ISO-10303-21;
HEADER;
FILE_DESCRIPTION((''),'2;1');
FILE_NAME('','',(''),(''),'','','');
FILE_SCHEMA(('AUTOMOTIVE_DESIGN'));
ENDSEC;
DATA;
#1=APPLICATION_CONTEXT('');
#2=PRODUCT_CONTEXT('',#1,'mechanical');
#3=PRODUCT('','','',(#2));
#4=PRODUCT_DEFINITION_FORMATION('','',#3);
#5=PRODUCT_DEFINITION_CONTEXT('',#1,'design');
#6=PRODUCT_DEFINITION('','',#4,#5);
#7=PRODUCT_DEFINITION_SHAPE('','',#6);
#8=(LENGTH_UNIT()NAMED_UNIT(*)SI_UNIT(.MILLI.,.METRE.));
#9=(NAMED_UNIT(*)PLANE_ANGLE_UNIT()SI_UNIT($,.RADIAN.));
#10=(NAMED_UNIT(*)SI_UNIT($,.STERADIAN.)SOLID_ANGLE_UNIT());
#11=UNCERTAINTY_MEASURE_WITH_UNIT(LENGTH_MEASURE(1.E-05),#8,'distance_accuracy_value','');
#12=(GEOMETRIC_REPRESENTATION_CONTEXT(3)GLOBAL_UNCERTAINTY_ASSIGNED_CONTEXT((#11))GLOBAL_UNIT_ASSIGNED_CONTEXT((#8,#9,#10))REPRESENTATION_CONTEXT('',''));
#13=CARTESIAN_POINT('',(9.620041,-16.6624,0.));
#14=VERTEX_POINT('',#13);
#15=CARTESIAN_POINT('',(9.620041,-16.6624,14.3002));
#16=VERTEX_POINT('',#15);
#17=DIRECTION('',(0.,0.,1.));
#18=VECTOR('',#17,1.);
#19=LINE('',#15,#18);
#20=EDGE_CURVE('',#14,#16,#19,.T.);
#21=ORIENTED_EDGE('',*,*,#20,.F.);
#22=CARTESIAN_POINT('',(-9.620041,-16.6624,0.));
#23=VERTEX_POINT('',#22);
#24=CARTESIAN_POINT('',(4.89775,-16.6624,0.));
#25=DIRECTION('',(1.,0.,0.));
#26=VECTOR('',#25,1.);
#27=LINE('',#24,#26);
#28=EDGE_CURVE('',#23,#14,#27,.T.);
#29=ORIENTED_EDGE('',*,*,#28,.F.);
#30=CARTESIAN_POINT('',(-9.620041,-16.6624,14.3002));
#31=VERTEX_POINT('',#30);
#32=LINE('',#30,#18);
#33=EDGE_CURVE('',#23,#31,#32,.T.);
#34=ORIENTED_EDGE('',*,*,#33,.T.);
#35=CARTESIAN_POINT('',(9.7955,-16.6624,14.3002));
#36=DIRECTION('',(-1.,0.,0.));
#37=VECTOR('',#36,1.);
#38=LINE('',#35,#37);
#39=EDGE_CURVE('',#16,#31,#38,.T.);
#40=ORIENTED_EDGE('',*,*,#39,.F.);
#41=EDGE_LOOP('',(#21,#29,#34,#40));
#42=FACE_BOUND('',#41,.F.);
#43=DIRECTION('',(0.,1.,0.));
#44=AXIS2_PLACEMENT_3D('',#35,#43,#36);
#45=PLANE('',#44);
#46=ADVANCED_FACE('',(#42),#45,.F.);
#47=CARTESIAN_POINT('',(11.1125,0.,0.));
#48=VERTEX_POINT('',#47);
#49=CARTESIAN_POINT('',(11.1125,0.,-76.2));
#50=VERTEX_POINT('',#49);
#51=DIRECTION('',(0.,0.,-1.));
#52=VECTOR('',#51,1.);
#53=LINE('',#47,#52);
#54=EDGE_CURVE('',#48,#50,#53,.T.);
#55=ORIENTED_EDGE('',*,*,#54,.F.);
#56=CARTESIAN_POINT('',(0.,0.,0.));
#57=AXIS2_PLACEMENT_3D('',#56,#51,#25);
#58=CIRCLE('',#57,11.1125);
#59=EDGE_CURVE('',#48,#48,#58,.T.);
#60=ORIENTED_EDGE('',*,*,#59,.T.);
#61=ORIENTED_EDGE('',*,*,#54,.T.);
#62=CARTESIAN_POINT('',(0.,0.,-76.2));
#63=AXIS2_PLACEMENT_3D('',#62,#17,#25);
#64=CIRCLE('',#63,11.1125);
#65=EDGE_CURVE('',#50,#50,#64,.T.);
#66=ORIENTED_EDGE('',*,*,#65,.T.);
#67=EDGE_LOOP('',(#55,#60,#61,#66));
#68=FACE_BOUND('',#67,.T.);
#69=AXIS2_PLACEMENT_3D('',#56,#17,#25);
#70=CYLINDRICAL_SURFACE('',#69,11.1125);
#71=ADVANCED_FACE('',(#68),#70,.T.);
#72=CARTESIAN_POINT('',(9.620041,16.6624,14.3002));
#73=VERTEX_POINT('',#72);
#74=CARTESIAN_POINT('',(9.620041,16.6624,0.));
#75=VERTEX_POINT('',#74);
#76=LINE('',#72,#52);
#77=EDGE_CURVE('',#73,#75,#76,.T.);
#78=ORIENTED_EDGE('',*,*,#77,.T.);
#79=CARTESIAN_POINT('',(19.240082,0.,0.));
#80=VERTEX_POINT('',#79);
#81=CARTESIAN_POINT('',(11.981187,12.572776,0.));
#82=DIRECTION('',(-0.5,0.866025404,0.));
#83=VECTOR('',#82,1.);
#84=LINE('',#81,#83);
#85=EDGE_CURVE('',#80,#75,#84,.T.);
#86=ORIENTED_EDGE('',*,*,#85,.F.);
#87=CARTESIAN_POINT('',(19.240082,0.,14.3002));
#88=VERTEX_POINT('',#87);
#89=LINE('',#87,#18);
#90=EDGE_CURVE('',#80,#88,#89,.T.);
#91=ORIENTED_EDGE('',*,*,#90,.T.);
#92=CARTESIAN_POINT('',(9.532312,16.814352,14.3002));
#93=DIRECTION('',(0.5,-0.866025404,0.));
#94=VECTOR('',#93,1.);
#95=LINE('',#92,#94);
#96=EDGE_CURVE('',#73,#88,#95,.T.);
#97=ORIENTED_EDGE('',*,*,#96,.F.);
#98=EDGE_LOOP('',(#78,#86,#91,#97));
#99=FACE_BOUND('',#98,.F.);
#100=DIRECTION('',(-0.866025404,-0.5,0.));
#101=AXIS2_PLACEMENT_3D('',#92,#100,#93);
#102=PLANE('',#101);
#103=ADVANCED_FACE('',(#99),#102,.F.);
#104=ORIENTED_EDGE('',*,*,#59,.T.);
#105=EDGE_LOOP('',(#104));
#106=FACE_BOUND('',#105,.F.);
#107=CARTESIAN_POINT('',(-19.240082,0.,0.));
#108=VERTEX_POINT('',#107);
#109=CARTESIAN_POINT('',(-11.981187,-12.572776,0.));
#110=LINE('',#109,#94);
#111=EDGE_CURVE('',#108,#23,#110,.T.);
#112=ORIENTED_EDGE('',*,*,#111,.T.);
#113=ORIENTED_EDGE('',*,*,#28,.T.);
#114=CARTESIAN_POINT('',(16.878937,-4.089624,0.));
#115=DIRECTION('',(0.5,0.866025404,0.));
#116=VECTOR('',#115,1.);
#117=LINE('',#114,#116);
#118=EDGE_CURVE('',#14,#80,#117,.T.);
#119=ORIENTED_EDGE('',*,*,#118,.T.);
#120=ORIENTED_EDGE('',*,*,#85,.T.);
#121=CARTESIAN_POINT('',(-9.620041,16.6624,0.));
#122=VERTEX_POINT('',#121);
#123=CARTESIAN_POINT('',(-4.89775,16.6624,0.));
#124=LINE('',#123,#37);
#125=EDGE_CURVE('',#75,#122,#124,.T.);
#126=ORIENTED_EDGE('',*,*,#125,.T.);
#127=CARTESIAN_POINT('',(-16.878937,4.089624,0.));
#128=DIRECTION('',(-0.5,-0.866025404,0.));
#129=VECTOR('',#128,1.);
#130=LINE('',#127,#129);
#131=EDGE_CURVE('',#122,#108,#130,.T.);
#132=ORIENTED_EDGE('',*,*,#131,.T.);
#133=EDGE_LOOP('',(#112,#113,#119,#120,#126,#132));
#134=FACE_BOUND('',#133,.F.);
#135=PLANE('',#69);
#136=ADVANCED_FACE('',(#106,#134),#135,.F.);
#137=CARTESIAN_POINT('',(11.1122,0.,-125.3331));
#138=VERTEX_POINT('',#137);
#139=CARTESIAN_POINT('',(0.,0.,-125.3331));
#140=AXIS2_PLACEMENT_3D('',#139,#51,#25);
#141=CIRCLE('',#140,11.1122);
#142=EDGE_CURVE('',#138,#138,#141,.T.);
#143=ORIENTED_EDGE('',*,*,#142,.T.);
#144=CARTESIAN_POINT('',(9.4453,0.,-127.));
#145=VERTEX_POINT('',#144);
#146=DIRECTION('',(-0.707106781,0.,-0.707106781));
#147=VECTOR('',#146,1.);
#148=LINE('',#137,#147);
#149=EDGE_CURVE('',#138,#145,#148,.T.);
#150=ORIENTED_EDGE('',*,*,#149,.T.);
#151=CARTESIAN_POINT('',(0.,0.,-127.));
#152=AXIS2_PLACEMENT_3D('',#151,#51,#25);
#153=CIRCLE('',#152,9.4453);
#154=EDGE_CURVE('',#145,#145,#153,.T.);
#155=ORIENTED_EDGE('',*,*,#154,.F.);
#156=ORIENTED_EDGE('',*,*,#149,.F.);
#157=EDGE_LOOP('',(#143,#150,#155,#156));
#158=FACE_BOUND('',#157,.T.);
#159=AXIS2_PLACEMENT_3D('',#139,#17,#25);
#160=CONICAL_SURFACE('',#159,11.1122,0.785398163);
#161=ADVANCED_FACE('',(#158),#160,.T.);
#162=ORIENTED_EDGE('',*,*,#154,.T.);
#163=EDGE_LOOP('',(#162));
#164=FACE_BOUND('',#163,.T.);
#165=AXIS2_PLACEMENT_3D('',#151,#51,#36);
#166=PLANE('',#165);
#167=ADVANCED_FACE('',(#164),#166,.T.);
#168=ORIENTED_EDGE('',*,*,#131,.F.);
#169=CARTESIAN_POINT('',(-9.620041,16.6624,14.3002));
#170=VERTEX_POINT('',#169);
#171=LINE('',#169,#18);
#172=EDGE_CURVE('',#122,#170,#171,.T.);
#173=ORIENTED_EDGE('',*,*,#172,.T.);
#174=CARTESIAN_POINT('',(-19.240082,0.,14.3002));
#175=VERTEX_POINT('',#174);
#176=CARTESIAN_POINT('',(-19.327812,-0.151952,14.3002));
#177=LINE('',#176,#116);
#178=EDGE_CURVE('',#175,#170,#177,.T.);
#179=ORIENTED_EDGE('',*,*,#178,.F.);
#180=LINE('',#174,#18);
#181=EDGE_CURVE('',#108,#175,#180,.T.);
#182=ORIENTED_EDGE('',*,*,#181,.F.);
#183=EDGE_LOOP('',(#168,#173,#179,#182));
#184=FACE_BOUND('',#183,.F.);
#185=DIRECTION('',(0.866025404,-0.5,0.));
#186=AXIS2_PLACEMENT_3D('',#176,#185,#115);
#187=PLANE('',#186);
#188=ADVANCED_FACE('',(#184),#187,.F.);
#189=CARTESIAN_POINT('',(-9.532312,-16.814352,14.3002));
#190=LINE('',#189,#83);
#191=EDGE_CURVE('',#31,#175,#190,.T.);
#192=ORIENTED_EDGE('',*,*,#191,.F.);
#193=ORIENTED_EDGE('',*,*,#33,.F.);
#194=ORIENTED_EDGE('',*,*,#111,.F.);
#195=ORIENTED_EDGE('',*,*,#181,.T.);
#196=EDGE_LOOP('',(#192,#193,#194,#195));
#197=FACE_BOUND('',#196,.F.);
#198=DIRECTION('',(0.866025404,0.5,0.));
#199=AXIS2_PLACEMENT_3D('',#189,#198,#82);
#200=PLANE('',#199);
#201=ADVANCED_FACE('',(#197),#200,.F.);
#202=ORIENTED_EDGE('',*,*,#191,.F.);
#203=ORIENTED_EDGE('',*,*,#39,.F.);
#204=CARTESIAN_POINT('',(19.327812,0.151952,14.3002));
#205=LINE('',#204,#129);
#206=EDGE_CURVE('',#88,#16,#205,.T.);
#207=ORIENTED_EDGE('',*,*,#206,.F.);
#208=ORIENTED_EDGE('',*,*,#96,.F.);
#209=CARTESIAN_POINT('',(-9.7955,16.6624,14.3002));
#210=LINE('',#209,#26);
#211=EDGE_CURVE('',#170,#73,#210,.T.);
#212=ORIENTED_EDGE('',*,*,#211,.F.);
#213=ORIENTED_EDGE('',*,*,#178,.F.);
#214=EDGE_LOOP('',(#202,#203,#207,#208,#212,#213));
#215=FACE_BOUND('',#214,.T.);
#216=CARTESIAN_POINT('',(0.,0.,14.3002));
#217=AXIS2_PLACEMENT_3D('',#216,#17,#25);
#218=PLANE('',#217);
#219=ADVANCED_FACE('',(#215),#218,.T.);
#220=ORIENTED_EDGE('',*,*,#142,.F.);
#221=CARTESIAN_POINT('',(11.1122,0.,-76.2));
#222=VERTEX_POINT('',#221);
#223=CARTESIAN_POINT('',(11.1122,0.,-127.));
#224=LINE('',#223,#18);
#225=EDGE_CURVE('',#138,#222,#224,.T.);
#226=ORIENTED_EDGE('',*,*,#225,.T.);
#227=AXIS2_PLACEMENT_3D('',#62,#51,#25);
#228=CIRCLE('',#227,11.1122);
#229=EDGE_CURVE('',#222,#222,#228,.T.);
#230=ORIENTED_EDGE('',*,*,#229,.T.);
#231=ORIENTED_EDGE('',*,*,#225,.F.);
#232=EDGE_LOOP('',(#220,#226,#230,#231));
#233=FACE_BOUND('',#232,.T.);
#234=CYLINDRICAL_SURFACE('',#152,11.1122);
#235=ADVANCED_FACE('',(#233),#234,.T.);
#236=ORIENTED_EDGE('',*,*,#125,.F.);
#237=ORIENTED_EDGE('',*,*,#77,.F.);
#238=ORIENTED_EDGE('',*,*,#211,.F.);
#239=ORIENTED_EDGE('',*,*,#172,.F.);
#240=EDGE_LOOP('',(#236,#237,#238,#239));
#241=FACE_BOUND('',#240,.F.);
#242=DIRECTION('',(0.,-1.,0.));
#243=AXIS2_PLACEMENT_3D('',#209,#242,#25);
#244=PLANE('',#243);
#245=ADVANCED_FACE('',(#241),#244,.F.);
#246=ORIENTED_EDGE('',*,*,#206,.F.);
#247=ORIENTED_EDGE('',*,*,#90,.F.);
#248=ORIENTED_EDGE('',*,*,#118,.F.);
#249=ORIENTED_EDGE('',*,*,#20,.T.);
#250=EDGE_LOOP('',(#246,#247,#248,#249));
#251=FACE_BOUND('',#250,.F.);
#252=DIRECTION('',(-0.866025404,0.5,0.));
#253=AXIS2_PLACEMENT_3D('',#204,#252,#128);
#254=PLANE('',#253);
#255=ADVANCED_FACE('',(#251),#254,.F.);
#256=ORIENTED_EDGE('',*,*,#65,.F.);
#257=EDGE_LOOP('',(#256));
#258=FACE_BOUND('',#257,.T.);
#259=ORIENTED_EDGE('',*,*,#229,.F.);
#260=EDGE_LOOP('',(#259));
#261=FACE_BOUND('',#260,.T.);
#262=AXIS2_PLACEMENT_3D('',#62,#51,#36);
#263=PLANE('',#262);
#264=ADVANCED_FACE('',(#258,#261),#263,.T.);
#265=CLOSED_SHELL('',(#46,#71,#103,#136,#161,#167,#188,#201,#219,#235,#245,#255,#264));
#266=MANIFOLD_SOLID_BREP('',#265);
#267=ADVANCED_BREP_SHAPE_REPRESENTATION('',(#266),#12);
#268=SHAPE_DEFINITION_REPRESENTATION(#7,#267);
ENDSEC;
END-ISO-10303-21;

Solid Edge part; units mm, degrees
sketch "Sketch1" plane through (0, 0, 0) normal (0, 0, 1) x (1, 0, 0)
  circle A0 centre (0, 0) radius 19.3284
  dimension "D1" = 38.6568
extrude "Protrusion1" add sketch "Sketch1" along normal blind 14.3002
sketch "Sketch2" plane through (0, 0, 0) normal (0, 0, -1) x (1, 0, 0)
  circle A0 centre (0, 0) radius 11.1125
extrude "Protrusion2" add sketch "Sketch2" along normal blind 127
sketch "Sketch3" plane through (0, 0, -127) normal (0, 0, -1) x (1, 0, 0)
  circle A0 centre (0, 0) radius 11.1122
extrude "Cutout1" cut sketch "Sketch3" against normal blind 50.8 flip side to cut
chamfer "Chamfer_1" distance 1.6669 angle 45 1 edges at (-11.1122, 0, -127)
sketch "Sketch4" plane through (0, 0, 14.3002) normal (0, 0, 1) x (1, 0, 0)
  line L0 (-9.7955, 16.6624) -> (9.7955, 16.6624)
  dimension "D1" = 33.3248
extrude "Cutout2" cut sketch "Sketch4" against normal up to next material side at (0, 16.7124, 14.3002)
pattern_circular "Pattern1" count 6 over 360 about axis through (0, 0, 14.3002) along (0, 0, 1) of "Cutout2"
properties part number "24107205"
